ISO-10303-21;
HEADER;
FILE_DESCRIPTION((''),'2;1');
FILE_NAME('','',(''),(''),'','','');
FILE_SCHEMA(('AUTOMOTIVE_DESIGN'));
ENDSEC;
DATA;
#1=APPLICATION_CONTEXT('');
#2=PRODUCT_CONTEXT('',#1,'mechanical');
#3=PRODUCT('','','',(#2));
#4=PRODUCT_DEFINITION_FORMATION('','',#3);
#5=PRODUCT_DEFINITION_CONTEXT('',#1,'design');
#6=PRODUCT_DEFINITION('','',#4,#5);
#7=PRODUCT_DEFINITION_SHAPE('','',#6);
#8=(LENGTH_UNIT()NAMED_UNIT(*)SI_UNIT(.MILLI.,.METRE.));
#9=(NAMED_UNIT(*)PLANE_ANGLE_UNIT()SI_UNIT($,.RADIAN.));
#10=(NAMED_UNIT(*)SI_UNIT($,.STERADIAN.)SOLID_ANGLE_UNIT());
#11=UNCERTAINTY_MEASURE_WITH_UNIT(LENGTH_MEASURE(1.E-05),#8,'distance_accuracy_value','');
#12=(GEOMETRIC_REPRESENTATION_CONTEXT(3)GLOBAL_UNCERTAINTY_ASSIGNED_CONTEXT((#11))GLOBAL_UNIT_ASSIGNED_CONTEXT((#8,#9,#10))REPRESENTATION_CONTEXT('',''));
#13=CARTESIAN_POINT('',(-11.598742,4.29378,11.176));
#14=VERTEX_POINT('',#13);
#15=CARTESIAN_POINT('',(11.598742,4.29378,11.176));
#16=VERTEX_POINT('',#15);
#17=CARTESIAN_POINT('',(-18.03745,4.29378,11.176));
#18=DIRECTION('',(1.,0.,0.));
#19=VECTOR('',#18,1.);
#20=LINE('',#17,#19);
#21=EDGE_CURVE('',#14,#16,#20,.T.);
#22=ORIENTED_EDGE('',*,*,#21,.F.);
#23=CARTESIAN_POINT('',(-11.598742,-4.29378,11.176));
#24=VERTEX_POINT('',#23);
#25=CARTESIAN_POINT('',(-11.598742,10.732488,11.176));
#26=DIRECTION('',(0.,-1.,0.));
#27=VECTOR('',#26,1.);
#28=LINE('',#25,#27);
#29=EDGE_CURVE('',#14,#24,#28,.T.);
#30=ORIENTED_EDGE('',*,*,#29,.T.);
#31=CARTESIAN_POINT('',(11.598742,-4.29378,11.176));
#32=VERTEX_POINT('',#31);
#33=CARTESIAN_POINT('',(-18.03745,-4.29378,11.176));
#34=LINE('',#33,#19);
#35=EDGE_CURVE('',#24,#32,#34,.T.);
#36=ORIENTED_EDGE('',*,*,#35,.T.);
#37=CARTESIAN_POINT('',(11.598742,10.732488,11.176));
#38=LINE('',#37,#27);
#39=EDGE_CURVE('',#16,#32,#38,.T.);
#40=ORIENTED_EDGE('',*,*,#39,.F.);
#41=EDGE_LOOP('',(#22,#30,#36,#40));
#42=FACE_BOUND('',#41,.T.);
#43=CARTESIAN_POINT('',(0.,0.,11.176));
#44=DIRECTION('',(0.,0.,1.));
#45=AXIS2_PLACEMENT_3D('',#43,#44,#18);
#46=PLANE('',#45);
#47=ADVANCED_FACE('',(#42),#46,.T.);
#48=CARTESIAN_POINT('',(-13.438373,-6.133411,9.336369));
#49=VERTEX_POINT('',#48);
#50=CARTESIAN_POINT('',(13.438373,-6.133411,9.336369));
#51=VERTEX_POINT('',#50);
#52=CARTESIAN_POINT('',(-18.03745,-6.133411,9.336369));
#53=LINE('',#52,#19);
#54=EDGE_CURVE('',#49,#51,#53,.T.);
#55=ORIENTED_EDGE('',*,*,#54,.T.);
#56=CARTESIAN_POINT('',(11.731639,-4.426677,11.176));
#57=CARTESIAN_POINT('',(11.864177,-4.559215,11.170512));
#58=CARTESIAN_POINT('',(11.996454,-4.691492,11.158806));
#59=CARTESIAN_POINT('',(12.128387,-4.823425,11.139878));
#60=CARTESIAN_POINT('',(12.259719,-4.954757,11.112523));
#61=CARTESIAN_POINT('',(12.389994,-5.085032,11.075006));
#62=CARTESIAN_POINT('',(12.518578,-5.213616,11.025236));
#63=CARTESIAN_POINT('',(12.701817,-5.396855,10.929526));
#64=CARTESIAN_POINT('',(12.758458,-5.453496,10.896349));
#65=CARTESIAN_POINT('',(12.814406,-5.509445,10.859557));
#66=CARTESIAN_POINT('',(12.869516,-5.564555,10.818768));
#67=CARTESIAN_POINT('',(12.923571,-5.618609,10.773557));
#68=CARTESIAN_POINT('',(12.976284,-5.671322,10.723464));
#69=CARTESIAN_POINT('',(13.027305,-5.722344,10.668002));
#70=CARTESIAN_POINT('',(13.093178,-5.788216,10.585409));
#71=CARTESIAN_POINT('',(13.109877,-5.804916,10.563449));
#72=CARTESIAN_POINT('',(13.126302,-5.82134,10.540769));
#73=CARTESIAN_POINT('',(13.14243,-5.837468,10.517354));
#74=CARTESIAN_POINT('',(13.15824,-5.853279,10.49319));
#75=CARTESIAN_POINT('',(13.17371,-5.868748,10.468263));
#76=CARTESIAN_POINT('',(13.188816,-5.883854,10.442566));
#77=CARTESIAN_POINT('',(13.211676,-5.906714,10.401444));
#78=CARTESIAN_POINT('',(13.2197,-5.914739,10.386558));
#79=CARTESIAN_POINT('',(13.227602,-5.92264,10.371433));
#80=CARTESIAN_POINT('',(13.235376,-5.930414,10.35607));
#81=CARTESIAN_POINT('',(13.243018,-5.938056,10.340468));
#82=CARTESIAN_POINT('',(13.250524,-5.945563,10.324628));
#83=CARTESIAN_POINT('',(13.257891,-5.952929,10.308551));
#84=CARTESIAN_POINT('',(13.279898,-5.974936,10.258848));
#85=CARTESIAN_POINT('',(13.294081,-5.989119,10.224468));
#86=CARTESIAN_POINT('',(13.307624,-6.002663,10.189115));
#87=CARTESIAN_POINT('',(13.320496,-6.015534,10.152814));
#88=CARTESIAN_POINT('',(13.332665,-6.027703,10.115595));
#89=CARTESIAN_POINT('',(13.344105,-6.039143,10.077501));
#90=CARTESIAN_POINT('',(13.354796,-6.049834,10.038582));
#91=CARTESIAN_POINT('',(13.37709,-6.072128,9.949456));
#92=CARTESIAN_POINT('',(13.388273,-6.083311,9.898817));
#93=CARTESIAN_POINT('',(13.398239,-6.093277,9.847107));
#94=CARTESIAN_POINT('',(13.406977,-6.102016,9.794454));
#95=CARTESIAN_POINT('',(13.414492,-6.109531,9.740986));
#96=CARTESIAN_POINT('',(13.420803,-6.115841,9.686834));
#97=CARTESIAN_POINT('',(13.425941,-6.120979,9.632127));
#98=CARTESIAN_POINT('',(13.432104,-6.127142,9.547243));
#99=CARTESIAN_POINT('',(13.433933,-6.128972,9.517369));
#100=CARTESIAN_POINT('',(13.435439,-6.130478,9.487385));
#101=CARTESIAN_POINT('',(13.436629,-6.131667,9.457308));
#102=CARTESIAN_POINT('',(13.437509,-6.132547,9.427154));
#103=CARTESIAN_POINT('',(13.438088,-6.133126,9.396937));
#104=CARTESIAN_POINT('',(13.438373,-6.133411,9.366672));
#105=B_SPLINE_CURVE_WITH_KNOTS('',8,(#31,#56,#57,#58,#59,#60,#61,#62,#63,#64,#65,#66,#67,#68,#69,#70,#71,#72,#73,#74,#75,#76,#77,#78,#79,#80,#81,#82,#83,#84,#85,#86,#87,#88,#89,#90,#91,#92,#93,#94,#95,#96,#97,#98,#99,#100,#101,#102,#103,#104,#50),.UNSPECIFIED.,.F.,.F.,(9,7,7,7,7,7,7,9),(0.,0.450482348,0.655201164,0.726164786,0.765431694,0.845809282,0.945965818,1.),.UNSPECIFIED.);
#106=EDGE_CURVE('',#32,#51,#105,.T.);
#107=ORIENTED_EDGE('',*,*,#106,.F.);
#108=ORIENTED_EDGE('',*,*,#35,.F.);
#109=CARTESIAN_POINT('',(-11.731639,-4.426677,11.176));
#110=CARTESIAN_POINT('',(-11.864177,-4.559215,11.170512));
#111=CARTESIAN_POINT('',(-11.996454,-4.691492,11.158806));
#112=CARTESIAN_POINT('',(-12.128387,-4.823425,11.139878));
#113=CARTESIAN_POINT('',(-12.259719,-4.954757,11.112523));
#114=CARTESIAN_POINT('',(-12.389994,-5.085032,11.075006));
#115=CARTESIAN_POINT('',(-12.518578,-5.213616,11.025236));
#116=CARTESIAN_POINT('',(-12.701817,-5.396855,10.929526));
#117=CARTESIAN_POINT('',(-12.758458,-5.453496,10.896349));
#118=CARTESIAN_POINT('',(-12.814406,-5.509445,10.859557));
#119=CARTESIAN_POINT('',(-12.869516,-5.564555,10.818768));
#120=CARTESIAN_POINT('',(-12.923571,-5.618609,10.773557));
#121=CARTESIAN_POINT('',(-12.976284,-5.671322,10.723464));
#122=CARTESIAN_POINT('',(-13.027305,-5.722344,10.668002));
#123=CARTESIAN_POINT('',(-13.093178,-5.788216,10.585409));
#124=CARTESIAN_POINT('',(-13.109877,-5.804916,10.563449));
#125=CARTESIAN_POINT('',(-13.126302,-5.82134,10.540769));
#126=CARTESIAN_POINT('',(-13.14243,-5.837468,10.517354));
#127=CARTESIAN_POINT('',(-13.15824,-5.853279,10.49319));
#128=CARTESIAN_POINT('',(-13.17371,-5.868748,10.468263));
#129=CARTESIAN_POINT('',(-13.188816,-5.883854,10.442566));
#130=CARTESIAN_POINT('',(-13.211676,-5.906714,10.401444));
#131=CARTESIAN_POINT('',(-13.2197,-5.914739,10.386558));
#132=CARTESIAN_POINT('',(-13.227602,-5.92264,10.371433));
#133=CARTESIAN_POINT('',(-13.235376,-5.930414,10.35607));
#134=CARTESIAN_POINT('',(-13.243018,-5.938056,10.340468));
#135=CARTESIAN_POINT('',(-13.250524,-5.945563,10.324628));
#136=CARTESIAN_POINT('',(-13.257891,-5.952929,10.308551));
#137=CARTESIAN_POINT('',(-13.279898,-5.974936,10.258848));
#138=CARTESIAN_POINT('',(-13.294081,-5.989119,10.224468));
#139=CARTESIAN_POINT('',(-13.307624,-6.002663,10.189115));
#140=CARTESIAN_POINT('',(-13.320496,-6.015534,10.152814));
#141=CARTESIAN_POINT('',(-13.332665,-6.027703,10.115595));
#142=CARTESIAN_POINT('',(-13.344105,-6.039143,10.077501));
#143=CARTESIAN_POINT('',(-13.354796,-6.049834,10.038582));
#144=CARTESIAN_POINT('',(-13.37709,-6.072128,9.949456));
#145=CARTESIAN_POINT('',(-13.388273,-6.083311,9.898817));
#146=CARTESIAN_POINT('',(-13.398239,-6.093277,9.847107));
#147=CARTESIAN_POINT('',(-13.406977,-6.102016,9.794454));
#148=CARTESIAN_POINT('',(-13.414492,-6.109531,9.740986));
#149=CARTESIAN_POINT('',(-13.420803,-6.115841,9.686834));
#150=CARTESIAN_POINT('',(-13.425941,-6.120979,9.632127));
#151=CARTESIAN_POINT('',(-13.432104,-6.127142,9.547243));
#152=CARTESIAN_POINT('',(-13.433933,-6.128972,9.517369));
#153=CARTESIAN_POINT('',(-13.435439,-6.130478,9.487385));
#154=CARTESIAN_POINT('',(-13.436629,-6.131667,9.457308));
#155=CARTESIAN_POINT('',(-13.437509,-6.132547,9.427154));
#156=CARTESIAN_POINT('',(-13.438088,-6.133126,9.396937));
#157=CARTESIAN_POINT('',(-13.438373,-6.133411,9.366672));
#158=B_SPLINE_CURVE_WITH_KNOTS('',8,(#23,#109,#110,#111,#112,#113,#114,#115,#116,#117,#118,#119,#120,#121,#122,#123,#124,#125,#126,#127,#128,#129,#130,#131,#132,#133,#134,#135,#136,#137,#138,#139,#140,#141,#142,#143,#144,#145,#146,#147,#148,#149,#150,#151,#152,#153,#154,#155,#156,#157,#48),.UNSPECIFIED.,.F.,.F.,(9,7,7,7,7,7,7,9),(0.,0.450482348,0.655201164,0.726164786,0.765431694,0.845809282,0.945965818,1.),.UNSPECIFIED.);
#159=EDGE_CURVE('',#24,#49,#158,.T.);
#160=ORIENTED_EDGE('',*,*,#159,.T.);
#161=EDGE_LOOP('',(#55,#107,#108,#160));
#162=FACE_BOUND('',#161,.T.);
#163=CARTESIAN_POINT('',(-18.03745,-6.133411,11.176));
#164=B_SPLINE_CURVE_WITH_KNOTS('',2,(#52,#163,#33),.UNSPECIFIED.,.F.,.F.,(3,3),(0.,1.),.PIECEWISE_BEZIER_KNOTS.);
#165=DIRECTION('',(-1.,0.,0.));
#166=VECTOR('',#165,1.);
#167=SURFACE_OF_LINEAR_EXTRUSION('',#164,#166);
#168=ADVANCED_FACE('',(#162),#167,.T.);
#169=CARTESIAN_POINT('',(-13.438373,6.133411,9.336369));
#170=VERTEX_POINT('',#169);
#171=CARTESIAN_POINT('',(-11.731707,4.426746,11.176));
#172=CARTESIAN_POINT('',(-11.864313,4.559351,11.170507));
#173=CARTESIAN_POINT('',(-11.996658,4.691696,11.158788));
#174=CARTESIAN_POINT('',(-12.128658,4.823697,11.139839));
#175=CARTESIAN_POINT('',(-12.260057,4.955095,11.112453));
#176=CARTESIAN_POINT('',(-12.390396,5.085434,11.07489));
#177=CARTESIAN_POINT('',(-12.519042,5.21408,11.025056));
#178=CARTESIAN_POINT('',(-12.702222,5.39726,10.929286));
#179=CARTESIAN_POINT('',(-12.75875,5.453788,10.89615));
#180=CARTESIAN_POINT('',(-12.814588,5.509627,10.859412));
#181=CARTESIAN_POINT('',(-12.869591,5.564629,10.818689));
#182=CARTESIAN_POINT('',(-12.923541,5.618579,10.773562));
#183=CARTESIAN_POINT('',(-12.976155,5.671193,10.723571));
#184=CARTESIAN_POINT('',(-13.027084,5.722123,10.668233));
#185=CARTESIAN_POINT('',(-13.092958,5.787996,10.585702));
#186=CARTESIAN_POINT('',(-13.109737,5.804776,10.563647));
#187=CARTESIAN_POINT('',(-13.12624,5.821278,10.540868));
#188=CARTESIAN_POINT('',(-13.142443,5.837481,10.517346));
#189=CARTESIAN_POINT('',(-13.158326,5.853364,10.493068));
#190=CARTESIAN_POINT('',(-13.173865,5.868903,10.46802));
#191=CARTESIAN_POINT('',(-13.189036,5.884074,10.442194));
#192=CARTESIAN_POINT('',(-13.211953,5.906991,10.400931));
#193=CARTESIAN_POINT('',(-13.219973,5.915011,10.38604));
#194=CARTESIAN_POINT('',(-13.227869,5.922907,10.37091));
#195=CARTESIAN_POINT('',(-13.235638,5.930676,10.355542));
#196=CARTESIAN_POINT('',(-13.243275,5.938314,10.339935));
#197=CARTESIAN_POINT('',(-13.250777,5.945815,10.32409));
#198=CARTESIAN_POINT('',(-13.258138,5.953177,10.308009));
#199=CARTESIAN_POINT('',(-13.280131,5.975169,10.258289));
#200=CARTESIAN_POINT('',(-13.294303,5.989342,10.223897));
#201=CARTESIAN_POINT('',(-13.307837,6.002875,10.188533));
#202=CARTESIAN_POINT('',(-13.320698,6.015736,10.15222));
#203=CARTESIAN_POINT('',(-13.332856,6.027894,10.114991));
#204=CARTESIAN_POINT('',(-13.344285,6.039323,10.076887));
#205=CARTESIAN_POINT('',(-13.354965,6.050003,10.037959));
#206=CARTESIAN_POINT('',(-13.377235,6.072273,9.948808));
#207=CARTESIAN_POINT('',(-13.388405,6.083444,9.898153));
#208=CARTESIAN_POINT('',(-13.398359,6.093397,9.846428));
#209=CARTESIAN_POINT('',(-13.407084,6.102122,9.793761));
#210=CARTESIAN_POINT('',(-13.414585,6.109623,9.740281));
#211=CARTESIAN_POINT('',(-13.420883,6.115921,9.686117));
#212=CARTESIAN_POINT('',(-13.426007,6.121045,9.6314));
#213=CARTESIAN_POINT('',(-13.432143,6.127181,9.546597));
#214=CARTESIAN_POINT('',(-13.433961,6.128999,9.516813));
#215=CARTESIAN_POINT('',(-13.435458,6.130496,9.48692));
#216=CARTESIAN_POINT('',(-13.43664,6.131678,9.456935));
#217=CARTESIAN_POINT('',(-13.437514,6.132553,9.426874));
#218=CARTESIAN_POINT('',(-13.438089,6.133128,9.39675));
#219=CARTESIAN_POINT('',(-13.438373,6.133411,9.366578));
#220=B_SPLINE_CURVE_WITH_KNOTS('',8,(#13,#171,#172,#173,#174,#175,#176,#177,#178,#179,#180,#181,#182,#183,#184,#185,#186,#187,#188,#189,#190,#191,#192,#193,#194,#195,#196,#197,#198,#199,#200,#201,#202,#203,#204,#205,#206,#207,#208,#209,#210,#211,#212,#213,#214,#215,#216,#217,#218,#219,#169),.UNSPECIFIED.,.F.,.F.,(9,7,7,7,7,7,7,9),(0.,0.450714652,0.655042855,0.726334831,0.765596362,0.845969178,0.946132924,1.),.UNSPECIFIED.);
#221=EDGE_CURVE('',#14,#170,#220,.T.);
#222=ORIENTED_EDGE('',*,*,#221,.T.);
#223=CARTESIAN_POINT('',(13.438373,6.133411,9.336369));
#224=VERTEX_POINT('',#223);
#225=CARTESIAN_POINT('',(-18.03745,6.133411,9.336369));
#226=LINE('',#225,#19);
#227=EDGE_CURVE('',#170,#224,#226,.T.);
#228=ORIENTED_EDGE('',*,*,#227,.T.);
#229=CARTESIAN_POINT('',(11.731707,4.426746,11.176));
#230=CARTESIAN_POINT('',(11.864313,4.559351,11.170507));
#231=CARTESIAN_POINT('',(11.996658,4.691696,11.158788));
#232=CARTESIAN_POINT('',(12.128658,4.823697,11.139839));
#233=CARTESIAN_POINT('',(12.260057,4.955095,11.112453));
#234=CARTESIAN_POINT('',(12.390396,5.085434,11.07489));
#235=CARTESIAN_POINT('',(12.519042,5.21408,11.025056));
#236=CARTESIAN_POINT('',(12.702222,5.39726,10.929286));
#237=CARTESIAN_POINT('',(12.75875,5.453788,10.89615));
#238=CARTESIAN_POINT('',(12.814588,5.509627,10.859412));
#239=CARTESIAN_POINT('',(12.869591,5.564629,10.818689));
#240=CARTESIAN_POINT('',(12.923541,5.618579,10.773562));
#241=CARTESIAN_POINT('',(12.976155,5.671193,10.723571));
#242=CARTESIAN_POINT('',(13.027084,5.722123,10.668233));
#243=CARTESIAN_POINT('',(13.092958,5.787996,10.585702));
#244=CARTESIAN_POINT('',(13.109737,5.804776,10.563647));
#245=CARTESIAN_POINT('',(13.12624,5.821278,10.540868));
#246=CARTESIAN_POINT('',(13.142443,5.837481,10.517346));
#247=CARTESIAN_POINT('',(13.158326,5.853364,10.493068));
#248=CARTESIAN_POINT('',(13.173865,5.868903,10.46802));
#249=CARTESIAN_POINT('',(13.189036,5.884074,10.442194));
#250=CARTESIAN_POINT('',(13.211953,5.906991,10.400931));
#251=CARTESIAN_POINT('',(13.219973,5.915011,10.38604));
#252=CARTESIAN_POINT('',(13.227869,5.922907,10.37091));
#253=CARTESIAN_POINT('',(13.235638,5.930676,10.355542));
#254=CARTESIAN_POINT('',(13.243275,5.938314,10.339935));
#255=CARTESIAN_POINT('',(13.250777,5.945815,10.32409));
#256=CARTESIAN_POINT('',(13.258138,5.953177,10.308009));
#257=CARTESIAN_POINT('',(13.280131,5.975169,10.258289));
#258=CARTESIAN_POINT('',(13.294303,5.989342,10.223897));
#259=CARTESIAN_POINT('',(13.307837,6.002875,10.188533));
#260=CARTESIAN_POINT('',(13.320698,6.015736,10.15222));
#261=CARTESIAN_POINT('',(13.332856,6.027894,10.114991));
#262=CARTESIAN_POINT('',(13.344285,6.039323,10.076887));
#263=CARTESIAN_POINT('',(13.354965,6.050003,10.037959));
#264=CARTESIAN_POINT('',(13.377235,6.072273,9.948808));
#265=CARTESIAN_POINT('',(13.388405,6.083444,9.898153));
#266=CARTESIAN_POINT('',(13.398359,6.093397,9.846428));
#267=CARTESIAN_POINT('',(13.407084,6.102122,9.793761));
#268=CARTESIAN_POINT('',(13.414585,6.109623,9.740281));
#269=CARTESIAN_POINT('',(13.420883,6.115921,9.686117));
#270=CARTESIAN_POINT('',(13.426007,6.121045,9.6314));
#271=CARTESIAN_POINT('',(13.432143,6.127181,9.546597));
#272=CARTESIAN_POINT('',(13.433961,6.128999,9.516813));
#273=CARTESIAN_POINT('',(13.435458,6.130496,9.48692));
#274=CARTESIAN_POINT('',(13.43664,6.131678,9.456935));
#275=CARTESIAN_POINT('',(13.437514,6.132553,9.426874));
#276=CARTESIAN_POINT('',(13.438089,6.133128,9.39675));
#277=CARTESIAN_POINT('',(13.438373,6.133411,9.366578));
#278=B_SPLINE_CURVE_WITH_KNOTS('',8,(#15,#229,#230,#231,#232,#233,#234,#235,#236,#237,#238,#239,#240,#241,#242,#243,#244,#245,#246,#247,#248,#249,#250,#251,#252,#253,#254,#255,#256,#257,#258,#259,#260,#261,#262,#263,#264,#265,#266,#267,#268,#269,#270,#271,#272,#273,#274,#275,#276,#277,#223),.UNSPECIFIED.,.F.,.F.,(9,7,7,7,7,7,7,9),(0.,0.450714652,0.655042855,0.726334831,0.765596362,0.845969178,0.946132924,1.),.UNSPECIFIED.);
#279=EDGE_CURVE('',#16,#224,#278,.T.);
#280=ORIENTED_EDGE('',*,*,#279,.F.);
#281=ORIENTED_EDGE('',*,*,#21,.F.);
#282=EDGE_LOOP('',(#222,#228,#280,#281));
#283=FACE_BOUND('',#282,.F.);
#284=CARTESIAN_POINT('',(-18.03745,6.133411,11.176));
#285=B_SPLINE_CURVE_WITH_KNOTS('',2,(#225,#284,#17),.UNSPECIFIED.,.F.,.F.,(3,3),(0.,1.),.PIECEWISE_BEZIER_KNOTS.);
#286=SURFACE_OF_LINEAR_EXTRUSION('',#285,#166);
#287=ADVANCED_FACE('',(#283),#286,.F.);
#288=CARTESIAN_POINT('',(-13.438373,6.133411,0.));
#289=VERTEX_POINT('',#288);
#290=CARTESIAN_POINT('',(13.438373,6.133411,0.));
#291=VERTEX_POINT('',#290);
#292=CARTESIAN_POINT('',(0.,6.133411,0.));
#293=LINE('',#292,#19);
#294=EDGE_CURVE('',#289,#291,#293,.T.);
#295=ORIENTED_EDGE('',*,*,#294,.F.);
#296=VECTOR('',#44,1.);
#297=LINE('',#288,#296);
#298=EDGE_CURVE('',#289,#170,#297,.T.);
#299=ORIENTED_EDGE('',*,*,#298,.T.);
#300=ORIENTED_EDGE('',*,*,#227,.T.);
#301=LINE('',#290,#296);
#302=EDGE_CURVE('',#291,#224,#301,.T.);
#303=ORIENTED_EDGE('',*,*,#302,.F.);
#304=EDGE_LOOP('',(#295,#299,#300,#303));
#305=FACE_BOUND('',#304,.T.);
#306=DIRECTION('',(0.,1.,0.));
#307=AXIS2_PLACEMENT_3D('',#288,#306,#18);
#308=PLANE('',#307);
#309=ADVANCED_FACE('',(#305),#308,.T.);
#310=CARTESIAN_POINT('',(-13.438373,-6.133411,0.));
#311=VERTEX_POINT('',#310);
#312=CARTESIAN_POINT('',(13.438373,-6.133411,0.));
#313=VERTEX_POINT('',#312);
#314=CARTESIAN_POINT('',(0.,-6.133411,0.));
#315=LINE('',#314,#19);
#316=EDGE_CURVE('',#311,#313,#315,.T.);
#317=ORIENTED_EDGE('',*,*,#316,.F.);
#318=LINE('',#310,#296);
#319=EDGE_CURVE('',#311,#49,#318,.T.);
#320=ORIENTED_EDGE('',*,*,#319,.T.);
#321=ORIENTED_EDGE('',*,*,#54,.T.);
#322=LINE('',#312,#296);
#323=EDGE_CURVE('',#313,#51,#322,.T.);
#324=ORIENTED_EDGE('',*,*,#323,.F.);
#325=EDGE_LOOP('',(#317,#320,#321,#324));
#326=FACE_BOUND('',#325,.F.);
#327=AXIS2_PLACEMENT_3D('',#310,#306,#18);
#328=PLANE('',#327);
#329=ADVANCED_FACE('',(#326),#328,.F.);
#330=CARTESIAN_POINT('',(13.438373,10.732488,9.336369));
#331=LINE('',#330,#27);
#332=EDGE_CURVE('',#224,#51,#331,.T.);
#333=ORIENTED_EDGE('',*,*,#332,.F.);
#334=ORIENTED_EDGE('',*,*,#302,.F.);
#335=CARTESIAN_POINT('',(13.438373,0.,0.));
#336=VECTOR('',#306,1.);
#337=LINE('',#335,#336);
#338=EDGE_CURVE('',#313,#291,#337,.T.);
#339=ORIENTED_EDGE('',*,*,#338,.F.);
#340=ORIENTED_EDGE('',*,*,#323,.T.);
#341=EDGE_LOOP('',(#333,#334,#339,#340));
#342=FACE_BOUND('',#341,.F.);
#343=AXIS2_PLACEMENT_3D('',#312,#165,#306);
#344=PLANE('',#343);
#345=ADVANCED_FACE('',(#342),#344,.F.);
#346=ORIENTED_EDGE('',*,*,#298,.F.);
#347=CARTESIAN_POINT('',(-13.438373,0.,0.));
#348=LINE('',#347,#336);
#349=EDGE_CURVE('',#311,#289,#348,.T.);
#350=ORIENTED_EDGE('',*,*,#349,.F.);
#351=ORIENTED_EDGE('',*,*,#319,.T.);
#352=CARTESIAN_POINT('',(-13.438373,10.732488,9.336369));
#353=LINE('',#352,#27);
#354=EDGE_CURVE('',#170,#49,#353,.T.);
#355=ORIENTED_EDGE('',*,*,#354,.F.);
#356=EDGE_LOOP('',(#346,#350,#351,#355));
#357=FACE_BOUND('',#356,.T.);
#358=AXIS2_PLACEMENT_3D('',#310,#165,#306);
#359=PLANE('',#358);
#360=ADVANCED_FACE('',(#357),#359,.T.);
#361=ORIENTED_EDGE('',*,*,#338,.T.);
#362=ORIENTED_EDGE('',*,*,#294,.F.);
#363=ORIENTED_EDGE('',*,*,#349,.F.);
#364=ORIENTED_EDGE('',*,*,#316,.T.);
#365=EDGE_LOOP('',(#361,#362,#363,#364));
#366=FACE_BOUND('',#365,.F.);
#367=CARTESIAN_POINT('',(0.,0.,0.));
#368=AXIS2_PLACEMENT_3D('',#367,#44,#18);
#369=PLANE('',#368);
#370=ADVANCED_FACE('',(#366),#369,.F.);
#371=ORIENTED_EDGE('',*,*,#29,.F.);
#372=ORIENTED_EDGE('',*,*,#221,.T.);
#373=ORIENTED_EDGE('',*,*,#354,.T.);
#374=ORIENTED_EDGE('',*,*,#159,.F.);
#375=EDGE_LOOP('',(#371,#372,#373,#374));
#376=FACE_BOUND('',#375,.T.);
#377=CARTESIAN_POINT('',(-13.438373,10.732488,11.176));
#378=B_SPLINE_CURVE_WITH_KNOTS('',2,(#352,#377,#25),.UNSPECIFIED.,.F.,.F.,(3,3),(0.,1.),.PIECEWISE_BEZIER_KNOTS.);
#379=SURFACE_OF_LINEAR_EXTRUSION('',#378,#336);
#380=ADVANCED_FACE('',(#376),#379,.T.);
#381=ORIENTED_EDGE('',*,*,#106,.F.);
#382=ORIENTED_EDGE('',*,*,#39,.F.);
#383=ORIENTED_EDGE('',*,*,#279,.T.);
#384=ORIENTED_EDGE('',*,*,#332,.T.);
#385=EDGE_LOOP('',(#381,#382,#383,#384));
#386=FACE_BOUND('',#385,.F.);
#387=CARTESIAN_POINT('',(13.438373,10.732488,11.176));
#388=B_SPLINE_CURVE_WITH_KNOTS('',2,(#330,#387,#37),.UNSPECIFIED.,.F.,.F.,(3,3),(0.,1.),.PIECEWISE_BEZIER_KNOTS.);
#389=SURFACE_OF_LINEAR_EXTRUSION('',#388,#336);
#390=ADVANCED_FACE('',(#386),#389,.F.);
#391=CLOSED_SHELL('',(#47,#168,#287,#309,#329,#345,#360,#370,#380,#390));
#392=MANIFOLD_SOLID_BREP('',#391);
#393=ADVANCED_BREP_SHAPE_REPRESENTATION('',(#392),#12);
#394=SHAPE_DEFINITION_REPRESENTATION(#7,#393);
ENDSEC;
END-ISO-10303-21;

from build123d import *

# Parameters (mm, degrees)
F0_W        = 26.8767457455
F0_H        = 12.2668221593
F1_DEPTH    = 11.176
F2_T1_DEPTH = 21.4649758319
F2_T3_DEPTH = 36.0748994182


# Not quite as in the source:
# - a fillet or chamfer that OpenCascade refuses, or shapes differently, is made with other operations: its cross-section is extruded or revolved along the edge and cut away or added


with BuildPart() as f1:
    # F0 (on Top) → F1 (new body)
    with BuildSketch(Plane.XY):
        Rectangle(F0_W, F0_H)
    extrude(amount=F1_DEPTH)

    # F2: fillet of radius 1.8396307345 on 4 edges, made by hand

    # F2_s2 → F2_t1 (cut)
    with BuildSketch(Plane.XZ.offset(-10.732487916)):
        with BuildLine():
            add(Edge.make_bspline(
                [(13.4383728728, 9.3363692655), (13.4383728728, 11.176), (11.5987421382, 11.176)],
                knots=[0, 0, 0, 1, 1, 1], degree=2, weights=[1, 1, 1]))
            Line((11.5987421382, 11.176), (13.4383728728, 11.176))
            Line((13.4383728728, 11.176), (13.4383728728, 9.3363692655))
        make_face()
        with BuildLine():
            add(Edge.make_bspline(
                [(-13.4383728728, 9.3363692655), (-13.4383728728, 11.176), (-11.5987421382, 11.176)],
                knots=[0, 0, 0, 1, 1, 1], degree=2, weights=[1, 1, 1]))
            Line((-11.5987421382, 11.176), (-13.4383728728, 11.176))
            Line((-13.4383728728, 11.176), (-13.4383728728, 9.3363692655))
        make_face()
    extrude(amount=F2_T1_DEPTH, mode=Mode.SUBTRACT)

    # F2_s4 → F2_t3 (cut)
    with BuildSketch(Plane.YZ.offset(-18.0374497091)):
        with BuildLine():
            add(Edge.make_bspline(
                [(6.1334110796, 9.3363692655), (6.1334110796, 11.176), (4.2937803451, 11.176)],
                knots=[0, 0, 0, 1, 1, 1], degree=2, weights=[1, 1, 1]))
            Line((4.2937803451, 11.176), (6.1334110796, 11.176))
            Line((6.1334110796, 11.176), (6.1334110796, 9.3363692655))
        make_face()
        with BuildLine():
            add(Edge.make_bspline(
                [(-6.1334110796, 9.3363692655), (-6.1334110796, 11.176), (-4.2937803451, 11.176)],
                knots=[0, 0, 0, 1, 1, 1], degree=2, weights=[1, 1, 1]))
            Line((-4.2937803451, 11.176), (-6.1334110796, 11.176))
            Line((-6.1334110796, 11.176), (-6.1334110796, 9.3363692655))
        make_face()
    extrude(amount=F2_T3_DEPTH, mode=Mode.SUBTRACT)


solid = f1.part
